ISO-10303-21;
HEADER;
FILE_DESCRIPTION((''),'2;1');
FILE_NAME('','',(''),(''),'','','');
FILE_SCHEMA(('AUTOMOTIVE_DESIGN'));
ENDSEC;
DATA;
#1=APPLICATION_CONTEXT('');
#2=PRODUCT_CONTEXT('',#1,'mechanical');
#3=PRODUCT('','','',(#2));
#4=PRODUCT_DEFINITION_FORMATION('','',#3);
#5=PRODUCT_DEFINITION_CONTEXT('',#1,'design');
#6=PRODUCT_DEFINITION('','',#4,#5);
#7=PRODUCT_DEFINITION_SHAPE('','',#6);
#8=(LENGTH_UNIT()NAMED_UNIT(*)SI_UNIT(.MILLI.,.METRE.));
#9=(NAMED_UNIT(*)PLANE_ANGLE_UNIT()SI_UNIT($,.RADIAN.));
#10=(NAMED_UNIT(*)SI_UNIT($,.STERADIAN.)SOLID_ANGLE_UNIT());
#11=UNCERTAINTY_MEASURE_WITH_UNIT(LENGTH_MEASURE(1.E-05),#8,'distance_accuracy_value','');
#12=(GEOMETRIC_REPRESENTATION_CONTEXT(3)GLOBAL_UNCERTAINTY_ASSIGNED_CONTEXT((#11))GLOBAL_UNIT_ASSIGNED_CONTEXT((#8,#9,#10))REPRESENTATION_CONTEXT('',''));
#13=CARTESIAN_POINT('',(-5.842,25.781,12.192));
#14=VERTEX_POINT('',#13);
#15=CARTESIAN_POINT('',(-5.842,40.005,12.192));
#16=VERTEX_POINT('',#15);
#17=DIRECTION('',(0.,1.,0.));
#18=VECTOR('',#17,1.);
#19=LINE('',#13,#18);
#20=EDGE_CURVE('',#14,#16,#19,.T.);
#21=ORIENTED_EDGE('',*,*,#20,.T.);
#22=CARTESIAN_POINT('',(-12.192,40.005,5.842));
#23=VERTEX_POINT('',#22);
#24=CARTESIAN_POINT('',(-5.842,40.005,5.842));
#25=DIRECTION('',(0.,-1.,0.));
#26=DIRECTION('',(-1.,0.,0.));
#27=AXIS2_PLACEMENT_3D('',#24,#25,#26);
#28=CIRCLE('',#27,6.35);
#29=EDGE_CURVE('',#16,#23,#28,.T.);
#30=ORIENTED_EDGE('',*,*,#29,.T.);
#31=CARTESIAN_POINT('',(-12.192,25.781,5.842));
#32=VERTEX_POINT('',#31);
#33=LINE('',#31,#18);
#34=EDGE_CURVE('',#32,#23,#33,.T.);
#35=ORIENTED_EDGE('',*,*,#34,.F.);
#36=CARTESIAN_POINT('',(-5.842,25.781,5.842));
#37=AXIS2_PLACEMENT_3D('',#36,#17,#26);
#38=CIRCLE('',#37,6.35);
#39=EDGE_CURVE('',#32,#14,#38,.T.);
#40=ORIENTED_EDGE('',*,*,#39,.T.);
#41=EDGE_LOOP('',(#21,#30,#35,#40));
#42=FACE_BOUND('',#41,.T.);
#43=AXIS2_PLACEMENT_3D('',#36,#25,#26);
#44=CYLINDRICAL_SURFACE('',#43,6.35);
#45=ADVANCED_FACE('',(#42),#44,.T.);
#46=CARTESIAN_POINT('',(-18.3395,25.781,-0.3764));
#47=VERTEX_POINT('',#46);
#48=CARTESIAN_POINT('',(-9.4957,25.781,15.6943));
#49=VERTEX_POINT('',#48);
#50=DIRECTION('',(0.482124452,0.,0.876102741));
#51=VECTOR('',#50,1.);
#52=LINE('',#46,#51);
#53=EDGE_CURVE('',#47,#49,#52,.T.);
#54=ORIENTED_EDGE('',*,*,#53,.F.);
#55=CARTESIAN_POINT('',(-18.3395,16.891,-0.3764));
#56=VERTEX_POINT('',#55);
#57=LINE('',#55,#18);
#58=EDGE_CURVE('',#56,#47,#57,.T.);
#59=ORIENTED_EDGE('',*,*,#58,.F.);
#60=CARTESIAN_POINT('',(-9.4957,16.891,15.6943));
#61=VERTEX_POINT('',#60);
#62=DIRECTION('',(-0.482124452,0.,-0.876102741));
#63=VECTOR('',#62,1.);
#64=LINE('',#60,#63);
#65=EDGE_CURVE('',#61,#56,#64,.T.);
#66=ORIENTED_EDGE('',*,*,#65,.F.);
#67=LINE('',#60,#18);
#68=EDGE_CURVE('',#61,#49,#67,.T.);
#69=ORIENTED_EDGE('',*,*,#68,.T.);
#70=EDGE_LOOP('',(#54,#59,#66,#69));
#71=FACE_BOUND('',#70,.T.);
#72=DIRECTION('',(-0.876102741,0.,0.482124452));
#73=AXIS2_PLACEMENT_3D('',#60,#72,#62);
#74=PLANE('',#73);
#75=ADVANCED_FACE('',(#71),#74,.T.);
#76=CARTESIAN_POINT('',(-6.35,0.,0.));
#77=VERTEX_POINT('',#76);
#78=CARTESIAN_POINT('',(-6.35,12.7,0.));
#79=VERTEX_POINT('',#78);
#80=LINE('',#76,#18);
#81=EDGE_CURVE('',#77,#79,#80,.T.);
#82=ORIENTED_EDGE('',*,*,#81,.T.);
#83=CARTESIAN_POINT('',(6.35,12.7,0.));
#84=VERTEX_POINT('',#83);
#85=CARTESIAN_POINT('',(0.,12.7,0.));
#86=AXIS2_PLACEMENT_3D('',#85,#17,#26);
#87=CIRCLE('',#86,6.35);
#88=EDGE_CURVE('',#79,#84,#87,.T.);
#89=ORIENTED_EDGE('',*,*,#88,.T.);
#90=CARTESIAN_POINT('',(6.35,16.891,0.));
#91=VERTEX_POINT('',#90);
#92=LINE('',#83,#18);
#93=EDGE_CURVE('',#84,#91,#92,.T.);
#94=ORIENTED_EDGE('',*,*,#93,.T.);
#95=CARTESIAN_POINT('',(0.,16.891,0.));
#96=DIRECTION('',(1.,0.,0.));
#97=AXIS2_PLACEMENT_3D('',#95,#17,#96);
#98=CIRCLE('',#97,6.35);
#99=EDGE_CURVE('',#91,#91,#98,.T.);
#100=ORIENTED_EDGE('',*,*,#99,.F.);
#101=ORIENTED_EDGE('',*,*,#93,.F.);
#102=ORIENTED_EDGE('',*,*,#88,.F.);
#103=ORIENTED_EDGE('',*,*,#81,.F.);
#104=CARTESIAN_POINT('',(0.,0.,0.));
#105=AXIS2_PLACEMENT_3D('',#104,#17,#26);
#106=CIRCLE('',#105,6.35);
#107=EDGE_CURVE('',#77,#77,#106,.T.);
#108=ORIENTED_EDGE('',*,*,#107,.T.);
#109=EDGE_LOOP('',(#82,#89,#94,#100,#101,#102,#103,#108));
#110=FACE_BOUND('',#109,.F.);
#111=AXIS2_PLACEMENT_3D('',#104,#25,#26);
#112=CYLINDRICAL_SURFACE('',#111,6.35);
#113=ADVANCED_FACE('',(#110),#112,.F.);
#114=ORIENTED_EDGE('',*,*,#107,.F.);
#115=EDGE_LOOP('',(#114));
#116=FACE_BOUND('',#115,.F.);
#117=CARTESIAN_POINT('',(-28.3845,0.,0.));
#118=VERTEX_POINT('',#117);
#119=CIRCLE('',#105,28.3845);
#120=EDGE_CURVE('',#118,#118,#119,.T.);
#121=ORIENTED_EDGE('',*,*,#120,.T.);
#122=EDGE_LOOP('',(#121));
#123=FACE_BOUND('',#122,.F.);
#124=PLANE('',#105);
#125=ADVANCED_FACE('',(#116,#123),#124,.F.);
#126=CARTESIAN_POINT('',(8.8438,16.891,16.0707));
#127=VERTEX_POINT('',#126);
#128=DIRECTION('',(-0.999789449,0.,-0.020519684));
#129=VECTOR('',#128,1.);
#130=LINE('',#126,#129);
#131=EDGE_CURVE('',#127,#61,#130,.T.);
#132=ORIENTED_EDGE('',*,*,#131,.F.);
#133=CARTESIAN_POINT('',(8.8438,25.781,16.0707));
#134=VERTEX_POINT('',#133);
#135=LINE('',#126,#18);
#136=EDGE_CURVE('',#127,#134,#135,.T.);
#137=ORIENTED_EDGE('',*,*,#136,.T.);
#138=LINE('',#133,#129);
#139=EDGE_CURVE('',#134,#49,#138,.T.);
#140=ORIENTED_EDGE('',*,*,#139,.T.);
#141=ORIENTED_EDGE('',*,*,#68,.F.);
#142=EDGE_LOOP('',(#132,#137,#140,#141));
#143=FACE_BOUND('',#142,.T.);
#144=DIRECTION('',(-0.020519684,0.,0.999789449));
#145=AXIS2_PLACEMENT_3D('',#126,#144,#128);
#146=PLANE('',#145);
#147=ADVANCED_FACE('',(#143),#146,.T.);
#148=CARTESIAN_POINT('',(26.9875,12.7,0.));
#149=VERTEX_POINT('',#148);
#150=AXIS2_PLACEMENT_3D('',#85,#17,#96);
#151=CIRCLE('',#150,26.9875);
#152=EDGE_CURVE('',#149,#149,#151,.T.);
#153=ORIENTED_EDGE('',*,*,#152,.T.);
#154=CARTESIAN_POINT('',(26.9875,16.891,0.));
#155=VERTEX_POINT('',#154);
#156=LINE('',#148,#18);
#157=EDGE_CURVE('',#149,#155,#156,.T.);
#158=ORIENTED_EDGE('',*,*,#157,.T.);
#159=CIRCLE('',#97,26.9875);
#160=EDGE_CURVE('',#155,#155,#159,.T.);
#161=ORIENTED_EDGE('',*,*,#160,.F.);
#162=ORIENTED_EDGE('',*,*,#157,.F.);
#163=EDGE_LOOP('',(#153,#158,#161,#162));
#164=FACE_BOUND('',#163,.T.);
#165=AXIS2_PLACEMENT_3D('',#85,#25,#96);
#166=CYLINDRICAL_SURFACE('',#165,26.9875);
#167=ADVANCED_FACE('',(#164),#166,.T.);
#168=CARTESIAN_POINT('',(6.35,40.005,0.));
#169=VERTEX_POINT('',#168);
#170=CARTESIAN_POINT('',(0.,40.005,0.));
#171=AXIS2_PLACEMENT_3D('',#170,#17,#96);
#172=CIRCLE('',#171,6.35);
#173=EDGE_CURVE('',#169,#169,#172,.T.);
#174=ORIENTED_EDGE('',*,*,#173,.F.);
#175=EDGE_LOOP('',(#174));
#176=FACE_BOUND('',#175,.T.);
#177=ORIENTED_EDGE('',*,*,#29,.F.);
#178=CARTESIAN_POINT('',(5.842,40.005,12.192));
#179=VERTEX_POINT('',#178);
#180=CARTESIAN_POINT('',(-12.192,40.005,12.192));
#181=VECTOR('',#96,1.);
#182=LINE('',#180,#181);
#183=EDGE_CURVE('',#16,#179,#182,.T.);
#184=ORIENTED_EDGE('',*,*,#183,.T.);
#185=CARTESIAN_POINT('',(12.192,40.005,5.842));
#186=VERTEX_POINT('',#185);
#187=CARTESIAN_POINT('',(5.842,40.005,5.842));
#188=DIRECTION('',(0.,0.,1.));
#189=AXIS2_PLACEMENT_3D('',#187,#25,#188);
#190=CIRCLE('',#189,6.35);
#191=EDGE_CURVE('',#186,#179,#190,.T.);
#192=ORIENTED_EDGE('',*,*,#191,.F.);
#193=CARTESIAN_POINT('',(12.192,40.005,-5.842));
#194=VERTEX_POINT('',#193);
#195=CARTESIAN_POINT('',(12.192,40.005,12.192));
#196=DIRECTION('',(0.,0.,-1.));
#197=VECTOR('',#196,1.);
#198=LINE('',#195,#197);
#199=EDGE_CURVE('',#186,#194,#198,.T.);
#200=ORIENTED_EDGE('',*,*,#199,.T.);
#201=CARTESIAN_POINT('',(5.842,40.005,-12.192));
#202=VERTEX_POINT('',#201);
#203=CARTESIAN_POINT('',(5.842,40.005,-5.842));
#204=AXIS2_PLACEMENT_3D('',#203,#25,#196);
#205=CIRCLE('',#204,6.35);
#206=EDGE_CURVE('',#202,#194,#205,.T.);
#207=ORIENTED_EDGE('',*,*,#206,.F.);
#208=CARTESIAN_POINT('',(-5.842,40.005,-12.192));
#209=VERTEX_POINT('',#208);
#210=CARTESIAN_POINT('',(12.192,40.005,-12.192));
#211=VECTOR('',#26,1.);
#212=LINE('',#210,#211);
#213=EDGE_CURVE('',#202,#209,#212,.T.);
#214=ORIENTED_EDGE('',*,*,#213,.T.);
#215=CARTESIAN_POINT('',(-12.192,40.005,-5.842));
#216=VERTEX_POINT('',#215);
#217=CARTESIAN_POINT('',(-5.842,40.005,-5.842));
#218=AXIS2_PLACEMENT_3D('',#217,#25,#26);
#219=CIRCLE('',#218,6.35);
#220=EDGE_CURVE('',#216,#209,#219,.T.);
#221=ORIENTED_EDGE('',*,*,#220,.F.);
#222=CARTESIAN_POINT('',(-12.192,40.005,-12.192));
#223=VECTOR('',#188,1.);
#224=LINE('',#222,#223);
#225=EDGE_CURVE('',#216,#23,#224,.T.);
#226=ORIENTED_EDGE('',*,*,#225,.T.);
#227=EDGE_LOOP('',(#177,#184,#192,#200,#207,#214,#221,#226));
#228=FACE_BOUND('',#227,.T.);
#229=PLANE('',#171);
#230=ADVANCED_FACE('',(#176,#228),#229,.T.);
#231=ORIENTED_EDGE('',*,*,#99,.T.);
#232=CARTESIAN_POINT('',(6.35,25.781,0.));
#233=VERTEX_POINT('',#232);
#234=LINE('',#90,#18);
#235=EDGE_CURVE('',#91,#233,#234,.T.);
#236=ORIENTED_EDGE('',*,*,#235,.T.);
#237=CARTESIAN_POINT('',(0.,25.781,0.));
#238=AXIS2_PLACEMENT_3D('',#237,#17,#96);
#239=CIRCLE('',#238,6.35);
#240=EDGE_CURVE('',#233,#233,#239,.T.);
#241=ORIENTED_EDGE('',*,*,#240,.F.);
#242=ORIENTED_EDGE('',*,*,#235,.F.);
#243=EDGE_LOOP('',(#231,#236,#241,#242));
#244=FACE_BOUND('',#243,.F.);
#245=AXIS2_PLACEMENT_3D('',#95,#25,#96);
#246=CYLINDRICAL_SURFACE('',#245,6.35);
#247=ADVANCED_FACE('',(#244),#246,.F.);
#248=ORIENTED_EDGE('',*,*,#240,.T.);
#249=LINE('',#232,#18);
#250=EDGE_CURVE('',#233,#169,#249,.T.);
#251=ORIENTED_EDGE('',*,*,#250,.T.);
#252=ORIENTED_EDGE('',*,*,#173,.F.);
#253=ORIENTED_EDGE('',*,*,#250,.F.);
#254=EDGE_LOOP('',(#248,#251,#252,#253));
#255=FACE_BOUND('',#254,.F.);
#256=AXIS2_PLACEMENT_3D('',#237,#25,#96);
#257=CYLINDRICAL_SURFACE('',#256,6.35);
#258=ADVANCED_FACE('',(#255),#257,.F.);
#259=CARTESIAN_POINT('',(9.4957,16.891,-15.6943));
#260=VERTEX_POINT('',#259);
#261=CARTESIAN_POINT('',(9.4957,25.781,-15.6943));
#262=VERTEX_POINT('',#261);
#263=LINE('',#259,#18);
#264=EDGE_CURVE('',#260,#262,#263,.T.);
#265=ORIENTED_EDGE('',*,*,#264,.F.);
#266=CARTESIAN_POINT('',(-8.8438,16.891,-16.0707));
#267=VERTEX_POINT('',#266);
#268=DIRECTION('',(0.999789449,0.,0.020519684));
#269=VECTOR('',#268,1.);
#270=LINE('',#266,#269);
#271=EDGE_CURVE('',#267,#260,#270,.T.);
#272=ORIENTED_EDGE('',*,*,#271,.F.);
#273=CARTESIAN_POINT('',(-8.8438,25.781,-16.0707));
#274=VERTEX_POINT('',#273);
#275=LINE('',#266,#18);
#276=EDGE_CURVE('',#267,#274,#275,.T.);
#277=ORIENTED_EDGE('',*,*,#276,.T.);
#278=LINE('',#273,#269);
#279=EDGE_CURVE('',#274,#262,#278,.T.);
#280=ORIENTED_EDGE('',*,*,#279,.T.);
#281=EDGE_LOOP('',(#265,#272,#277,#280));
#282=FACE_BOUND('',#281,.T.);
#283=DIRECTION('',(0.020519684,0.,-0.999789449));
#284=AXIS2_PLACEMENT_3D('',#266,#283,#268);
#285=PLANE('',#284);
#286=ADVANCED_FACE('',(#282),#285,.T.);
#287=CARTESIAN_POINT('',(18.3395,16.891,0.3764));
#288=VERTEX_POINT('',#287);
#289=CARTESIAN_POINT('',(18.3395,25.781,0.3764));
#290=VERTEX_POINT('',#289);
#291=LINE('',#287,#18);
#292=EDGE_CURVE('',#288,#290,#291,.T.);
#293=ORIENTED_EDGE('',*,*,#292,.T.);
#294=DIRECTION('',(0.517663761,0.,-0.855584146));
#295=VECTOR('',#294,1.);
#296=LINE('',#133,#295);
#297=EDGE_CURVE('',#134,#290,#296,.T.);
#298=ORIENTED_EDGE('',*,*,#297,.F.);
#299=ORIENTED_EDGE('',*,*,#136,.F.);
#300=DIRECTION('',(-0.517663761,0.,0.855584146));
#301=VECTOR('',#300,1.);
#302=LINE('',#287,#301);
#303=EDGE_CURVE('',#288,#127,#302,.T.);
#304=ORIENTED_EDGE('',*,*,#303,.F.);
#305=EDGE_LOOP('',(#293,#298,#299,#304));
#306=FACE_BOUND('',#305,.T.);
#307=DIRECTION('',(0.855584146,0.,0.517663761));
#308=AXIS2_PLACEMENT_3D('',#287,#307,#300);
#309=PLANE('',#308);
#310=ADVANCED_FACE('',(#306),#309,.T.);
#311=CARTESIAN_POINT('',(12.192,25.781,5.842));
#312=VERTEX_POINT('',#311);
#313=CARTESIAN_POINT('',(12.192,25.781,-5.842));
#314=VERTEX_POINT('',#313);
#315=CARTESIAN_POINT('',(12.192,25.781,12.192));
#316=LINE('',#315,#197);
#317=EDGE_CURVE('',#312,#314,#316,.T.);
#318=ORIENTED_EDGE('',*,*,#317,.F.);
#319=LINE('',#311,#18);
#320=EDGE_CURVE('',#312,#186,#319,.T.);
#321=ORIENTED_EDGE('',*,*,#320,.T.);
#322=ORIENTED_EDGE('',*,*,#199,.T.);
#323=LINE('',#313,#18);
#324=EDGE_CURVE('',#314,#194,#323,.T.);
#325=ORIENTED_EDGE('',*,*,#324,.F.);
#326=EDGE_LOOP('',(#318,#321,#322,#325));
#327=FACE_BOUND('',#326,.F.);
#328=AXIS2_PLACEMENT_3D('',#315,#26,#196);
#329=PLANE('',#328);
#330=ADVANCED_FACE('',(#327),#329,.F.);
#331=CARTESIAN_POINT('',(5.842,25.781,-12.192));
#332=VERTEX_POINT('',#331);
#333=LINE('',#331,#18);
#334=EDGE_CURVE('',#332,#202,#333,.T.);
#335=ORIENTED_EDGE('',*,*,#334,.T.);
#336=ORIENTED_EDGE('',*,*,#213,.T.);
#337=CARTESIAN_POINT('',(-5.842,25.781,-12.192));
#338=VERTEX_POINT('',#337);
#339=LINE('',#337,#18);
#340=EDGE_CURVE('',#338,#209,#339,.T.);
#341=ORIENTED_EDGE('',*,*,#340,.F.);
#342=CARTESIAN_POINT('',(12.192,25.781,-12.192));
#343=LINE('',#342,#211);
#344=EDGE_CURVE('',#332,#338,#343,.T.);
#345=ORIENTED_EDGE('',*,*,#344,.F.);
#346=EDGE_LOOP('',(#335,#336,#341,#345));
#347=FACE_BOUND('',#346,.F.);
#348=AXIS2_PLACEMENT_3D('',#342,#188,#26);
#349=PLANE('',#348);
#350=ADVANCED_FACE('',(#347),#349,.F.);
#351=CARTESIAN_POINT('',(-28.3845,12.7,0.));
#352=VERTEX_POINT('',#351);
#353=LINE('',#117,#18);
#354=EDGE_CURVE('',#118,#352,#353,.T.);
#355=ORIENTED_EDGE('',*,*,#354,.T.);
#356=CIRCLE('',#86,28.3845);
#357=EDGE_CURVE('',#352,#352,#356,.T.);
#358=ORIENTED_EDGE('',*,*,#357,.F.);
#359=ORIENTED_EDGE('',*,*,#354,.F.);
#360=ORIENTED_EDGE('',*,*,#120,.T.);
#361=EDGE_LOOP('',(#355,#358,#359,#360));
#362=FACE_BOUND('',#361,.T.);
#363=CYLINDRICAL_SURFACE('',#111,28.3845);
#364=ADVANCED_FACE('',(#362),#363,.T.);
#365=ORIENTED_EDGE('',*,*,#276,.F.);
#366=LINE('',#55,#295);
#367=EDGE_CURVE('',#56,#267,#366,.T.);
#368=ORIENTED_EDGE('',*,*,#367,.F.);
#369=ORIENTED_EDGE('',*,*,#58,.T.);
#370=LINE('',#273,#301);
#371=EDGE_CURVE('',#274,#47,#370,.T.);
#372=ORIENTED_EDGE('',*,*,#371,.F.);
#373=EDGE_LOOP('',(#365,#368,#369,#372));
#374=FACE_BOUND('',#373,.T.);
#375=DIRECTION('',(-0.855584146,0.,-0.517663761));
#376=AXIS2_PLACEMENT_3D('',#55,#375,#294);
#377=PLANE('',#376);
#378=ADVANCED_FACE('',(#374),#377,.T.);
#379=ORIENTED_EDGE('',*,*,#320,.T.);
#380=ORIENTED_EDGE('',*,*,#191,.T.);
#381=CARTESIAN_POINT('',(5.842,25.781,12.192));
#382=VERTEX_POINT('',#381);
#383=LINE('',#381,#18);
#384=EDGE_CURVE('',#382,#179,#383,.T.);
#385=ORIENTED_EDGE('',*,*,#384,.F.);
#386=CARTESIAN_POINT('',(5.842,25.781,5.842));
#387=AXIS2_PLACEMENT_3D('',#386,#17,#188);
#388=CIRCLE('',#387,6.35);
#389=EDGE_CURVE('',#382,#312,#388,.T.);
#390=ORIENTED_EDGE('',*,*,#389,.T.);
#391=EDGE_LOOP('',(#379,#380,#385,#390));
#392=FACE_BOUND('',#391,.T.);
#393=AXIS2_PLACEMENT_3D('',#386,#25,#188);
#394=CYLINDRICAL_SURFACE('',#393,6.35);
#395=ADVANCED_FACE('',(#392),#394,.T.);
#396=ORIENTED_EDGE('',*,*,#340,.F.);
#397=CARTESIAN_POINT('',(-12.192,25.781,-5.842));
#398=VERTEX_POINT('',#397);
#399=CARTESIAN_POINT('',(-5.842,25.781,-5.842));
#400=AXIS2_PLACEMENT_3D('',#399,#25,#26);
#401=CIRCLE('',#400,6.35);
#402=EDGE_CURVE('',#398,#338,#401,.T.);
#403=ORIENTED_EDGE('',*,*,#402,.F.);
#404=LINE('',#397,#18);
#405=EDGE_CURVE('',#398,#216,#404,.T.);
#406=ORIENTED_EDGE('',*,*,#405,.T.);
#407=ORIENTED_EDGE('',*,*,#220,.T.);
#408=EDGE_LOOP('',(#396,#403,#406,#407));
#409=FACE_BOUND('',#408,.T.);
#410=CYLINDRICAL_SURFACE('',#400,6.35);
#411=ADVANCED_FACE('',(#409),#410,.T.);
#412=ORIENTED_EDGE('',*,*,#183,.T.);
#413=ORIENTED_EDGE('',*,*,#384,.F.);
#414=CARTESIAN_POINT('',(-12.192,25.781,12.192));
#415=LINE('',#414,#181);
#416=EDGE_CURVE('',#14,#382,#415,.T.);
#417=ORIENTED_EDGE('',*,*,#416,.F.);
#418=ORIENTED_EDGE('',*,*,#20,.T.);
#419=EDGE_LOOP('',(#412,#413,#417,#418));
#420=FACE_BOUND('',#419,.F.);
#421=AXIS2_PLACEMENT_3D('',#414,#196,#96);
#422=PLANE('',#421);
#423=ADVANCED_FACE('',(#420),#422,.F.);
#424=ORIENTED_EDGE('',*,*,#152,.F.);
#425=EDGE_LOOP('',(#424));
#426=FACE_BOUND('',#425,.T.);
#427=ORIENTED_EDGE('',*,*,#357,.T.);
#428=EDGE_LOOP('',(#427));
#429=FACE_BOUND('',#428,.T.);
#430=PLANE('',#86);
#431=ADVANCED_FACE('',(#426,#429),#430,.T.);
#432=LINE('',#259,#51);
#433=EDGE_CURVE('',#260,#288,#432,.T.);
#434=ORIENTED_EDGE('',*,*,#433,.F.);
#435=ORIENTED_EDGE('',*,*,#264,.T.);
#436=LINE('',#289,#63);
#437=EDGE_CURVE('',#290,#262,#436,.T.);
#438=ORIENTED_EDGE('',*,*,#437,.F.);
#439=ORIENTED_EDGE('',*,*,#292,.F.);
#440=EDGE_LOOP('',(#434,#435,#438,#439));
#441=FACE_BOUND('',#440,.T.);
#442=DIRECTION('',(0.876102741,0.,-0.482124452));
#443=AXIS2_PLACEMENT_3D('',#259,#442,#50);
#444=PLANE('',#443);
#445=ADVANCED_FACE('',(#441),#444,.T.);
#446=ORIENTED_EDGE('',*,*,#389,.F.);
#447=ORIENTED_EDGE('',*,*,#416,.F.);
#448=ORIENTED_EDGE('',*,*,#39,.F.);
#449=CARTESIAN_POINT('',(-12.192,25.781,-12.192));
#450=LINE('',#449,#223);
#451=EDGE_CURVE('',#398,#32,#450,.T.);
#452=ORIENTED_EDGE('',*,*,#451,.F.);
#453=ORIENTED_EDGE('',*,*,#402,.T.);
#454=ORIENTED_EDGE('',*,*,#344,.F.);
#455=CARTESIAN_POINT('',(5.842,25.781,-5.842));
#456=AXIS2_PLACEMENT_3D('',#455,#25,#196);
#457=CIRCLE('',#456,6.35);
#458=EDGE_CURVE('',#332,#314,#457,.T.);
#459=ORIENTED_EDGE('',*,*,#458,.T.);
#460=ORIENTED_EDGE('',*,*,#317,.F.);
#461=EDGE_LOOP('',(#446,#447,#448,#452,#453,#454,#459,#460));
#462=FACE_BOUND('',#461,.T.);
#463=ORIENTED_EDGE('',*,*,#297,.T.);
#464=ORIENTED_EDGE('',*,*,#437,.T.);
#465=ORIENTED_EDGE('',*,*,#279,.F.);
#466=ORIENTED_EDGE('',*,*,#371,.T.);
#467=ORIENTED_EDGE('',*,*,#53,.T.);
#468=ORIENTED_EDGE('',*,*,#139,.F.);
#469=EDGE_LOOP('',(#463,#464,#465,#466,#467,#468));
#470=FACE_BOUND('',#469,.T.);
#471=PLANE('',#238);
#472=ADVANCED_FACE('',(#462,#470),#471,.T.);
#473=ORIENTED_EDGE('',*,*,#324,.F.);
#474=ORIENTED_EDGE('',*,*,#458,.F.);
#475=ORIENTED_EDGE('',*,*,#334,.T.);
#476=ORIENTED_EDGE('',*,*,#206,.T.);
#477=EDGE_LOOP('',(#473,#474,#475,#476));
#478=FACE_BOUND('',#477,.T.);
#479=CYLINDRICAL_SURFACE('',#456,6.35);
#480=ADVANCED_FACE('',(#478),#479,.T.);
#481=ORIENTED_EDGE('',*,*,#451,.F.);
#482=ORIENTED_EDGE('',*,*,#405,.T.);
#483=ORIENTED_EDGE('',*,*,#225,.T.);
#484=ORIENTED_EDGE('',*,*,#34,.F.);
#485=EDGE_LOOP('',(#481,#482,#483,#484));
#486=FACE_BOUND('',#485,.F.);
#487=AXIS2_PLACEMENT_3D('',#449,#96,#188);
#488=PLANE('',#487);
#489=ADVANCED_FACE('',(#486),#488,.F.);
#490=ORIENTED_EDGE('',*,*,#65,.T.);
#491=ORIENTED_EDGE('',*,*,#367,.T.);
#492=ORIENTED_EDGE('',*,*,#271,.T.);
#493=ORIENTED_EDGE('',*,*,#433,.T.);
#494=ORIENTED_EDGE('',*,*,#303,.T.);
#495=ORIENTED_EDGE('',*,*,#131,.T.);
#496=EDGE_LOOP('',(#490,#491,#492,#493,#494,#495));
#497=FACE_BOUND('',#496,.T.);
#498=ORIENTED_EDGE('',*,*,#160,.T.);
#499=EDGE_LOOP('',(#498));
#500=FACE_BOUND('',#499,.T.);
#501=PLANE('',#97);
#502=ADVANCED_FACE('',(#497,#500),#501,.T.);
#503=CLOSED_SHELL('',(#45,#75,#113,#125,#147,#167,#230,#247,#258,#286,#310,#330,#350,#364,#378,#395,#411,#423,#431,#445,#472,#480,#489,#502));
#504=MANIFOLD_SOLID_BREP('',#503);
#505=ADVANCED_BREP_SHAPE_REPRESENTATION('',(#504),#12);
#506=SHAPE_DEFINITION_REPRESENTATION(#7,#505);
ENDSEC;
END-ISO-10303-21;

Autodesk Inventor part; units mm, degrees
ref_plane "YZ Plane" through (0, 0, 0) normal (1, 0, 0) x (0, 1, 0)
ref_plane "XZ Plane" through (0, 0, 0) normal (0, 1, 0) x (-1, 0, 0)
ref_plane "XY Plane" through (0, 0, 0) normal (0, 0, 1) x (1, 0, 0)
sketch "Sketch1" plane through (0, 0, 0) normal (0, 1, 0) x (-1, 0, 0)
  circle A0 centre (0, 0) radius 28.3845
  circle A1 centre (0, 0) radius 6.35
  dimension "d0" = 56.769
  dimension "d1" = 12.7
extrude "Extrusion1" add sketch "Sketch1" along normal blind 12.7
sketch "Sketch2" plane through (0, 12.7, 0) normal (0, 1, 0) x (1, 0, 0)
  circle A0 centre (0, 0) radius 26.9875
  circle A1 centre (0, 0) radius 6.35
  dimension "d4" = 53.975
extrude "Extrusion2" add sketch "Sketch2" along normal blind 4.191
sketch "Sketch3" plane through (0, 16.891, 0) normal (0, 1, 0) x (1, 0, 0)
  line L0 (9.4957, 15.6943) -> (18.3395, -0.3764)
  line L1 (18.3395, -0.3764) -> (8.8438, -16.0707)
  line L2 (8.8438, -16.0707) -> (-9.4957, -15.6943)
  line L3 (-9.4957, -15.6943) -> (-18.3395, 0.3764)
  line L4 (-18.3395, 0.3764) -> (-8.8438, 16.0707)
  line L5 (-8.8438, 16.0707) -> (9.4957, 15.6943)
  circle A0 centre (0, 0) radius 6.35
extrude "Extrusion3" add sketch "Sketch3" along normal blind 8.89
sketch "Sketch4" plane through (0, 25.781, 0) normal (0, 1, 0) x (1, 0, 0)
  line L0 (-12.192, -12.192) -> (12.192, -12.192)
  line L1 (12.192, -12.192) -> (12.192, 12.192)
  line L2 (12.192, 12.192) -> (-12.192, 12.192)
  line L3 (-12.192, 12.192) -> (-12.192, -12.192)
  circle A0 centre (0, 0) radius 6.35
  dimension "d9" = 24.384
  dimension "d10" = 24.384
extrude "Extrusion4" add sketch "Sketch4" along normal blind 14.224
fillet "Fillet1" radius 6.35 4 edges at (12.192, 32.893, 12.192) (12.192, 32.893, -12.192) (-12.192, 32.893, -12.192) (-12.192, 32.893, 12.192)
properties part number "Top"
